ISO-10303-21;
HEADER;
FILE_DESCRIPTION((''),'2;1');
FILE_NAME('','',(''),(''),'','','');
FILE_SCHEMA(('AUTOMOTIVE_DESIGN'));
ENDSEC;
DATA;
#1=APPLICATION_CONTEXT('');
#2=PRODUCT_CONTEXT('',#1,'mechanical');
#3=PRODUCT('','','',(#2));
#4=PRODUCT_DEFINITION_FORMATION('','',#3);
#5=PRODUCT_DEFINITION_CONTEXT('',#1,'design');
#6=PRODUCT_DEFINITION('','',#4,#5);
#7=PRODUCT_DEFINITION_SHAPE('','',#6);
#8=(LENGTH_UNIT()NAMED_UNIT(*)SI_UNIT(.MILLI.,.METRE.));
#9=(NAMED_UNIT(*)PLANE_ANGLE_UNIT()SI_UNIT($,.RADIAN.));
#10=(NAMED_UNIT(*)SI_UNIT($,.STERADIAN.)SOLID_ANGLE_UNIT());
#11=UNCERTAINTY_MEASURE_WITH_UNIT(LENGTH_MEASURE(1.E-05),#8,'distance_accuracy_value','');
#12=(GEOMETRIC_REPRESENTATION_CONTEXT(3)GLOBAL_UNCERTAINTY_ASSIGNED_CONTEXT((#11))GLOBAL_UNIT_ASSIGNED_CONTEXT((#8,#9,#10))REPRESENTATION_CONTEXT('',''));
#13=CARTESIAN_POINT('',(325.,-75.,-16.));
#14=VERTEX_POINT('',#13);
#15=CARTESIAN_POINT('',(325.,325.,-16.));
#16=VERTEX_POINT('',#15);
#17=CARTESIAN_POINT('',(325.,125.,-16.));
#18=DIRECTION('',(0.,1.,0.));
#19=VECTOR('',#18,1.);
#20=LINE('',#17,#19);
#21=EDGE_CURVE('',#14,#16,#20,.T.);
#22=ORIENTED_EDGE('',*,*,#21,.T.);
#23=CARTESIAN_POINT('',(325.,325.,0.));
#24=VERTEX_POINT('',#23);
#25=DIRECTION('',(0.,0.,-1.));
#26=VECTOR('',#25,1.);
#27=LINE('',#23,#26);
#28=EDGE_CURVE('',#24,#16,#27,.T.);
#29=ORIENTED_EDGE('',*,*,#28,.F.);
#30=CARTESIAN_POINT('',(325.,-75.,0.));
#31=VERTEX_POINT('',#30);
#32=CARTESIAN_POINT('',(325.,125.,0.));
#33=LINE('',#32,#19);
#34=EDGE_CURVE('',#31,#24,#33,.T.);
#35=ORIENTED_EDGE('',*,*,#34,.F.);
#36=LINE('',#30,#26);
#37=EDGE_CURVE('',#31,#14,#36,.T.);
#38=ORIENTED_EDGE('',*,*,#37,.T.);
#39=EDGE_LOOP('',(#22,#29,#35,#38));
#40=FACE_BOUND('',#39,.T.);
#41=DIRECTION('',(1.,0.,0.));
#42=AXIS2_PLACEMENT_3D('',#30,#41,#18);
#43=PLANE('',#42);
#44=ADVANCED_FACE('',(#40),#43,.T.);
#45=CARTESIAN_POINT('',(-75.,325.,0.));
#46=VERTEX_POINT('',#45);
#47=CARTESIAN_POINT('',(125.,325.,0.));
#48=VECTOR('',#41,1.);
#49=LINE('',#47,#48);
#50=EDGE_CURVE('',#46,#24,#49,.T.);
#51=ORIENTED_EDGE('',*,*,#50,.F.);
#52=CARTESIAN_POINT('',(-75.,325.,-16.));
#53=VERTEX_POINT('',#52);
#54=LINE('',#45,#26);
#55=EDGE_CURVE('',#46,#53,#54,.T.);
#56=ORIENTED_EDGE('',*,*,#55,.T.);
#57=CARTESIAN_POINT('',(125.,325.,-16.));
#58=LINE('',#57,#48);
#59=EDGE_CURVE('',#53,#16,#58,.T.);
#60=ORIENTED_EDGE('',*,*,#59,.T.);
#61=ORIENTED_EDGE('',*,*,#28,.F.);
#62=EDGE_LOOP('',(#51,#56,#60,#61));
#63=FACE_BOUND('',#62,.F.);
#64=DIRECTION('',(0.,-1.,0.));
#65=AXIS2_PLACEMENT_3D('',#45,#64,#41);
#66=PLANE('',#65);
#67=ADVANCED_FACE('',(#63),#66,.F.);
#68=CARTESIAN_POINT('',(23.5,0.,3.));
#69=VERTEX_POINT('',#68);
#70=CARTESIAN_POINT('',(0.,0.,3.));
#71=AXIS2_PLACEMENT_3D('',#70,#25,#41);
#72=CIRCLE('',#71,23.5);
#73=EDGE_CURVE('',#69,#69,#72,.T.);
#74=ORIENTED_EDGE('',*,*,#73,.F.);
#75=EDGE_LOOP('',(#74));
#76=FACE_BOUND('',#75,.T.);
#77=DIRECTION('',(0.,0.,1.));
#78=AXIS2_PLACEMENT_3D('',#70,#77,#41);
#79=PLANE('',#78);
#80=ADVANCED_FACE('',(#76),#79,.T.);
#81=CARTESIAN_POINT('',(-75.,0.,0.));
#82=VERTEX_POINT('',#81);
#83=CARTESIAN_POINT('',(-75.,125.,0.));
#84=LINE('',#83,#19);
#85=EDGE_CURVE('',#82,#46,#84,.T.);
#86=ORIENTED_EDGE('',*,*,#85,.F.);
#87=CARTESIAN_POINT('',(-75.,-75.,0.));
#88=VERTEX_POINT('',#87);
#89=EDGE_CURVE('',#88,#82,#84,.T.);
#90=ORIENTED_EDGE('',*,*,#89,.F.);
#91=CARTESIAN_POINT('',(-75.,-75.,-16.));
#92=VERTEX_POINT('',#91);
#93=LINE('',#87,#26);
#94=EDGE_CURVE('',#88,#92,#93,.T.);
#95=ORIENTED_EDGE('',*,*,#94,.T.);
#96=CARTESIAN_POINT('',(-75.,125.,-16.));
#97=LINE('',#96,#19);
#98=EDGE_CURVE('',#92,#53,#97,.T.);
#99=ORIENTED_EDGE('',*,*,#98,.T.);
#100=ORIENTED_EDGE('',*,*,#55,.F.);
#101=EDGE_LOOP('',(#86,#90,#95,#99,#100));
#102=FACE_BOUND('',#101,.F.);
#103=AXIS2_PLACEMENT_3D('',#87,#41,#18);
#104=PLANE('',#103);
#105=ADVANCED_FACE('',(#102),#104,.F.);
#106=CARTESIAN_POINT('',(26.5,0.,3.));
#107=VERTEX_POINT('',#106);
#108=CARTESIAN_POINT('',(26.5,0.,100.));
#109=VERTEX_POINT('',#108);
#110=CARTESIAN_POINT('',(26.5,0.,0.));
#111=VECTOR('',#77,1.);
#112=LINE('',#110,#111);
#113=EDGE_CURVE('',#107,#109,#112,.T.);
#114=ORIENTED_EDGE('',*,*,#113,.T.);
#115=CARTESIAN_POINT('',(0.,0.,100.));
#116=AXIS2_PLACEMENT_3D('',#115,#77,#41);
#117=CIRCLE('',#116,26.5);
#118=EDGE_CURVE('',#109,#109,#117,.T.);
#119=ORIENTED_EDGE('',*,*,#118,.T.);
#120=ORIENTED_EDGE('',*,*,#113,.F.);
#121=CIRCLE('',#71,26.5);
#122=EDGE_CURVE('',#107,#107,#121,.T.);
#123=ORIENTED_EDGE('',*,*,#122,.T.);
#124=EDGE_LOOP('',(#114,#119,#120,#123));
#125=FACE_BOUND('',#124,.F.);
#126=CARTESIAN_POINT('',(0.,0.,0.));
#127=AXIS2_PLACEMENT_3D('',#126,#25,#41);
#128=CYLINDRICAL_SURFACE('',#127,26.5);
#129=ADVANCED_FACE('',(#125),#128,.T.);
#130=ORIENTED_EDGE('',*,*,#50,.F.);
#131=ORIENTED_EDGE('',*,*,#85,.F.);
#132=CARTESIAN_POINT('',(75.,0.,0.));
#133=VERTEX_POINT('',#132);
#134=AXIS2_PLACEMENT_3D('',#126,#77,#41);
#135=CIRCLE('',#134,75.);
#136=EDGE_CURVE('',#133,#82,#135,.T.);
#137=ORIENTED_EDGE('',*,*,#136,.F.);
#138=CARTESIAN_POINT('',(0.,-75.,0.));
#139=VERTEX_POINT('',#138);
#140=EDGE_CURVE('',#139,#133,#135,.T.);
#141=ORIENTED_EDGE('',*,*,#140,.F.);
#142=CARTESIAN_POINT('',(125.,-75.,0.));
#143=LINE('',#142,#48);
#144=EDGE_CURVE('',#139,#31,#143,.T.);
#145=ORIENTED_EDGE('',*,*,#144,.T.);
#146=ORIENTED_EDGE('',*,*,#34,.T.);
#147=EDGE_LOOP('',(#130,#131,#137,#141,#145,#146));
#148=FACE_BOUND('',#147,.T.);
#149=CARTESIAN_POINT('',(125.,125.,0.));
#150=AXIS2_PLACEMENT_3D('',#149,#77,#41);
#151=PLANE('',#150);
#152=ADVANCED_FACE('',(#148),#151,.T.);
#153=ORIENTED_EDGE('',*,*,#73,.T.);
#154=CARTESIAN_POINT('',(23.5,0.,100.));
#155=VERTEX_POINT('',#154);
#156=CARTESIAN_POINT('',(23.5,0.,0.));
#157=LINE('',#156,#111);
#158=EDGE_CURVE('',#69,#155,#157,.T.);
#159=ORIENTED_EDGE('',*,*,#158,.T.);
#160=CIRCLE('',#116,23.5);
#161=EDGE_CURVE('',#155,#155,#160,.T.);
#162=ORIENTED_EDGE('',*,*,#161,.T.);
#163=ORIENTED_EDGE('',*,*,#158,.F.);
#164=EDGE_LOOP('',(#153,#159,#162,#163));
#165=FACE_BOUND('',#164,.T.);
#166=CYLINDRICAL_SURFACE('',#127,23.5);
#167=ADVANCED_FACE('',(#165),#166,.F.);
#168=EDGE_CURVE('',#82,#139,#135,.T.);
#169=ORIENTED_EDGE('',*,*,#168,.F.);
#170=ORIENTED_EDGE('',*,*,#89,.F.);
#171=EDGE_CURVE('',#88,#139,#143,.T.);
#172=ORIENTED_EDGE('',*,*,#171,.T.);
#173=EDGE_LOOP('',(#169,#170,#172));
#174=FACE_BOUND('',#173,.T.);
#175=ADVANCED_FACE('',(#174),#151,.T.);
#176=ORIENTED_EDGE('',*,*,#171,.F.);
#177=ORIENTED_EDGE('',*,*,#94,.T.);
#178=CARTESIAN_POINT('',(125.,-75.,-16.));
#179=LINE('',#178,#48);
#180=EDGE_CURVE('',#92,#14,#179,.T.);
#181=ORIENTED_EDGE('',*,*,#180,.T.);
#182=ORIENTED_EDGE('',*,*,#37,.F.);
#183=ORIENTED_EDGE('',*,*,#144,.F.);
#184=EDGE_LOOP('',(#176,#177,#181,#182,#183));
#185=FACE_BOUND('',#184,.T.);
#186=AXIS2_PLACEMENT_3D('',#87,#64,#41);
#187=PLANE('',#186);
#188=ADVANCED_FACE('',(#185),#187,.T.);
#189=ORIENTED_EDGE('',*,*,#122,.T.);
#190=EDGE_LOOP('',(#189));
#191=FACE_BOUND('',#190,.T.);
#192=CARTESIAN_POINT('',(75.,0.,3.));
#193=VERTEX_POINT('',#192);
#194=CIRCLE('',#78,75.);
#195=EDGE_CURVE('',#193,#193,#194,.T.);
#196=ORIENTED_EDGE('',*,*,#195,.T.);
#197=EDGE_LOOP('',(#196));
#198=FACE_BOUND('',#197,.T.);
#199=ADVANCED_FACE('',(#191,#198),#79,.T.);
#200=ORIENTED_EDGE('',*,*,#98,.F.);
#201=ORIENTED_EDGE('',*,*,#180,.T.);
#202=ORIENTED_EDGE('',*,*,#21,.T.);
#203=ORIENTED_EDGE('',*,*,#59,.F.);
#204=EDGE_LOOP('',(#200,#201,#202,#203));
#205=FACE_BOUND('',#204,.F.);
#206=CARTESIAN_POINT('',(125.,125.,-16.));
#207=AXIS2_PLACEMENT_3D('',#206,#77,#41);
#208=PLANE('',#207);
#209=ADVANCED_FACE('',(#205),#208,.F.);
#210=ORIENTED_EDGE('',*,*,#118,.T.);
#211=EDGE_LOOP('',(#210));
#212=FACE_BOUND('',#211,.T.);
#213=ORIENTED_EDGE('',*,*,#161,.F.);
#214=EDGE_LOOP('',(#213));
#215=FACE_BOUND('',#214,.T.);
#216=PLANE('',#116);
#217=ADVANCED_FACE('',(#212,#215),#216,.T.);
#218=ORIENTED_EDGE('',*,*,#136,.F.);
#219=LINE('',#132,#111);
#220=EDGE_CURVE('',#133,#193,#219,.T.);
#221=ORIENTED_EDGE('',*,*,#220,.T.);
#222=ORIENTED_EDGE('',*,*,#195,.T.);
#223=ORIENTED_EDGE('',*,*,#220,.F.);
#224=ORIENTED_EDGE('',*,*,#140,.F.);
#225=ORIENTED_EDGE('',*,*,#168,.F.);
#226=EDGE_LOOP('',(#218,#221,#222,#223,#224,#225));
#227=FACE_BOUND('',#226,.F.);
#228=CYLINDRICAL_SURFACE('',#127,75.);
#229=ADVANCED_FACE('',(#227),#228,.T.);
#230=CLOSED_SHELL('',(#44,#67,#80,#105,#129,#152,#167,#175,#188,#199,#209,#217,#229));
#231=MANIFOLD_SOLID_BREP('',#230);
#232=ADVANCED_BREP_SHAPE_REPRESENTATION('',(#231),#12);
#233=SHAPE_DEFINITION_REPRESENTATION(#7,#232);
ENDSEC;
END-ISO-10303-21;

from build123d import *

# Parameters (mm, degrees)
F0_R     = 26.5
F1_DEPTH = 100
F2_T     = -3
F3_R     = 75
F4_DEPTH = 3
F5_W     = 400
F5_H     = 400
F6_DEPTH = 16


# Not quite as in the source:
# - a feature names something its author has since deleted; it is built from what else it names


with BuildPart() as f1:
    # F0 (on Top) → F1 (new body)
    with BuildSketch(Plane.XY):
        Circle(F0_R)
    extrude(amount=F1_DEPTH)

    # F2
    f2_openings = [f1.faces().sort_by_distance(p)[0] for p in [
        (0, 0, 100),
        (0, 0, 0),
    ]]
    offset(amount=F2_T, openings=f2_openings)

    # F3 (on Top) → F4 (join)
    with BuildSketch(Plane.XY):
        Circle(F3_R)
    extrude(amount=F4_DEPTH)

    # F5 (on Top) → F6 (join)
    with BuildSketch(Plane.XY):
        with Locations((125, 125)):
            Rectangle(F5_W, F5_H)
    extrude(amount=-F6_DEPTH)


solid = f1.part
